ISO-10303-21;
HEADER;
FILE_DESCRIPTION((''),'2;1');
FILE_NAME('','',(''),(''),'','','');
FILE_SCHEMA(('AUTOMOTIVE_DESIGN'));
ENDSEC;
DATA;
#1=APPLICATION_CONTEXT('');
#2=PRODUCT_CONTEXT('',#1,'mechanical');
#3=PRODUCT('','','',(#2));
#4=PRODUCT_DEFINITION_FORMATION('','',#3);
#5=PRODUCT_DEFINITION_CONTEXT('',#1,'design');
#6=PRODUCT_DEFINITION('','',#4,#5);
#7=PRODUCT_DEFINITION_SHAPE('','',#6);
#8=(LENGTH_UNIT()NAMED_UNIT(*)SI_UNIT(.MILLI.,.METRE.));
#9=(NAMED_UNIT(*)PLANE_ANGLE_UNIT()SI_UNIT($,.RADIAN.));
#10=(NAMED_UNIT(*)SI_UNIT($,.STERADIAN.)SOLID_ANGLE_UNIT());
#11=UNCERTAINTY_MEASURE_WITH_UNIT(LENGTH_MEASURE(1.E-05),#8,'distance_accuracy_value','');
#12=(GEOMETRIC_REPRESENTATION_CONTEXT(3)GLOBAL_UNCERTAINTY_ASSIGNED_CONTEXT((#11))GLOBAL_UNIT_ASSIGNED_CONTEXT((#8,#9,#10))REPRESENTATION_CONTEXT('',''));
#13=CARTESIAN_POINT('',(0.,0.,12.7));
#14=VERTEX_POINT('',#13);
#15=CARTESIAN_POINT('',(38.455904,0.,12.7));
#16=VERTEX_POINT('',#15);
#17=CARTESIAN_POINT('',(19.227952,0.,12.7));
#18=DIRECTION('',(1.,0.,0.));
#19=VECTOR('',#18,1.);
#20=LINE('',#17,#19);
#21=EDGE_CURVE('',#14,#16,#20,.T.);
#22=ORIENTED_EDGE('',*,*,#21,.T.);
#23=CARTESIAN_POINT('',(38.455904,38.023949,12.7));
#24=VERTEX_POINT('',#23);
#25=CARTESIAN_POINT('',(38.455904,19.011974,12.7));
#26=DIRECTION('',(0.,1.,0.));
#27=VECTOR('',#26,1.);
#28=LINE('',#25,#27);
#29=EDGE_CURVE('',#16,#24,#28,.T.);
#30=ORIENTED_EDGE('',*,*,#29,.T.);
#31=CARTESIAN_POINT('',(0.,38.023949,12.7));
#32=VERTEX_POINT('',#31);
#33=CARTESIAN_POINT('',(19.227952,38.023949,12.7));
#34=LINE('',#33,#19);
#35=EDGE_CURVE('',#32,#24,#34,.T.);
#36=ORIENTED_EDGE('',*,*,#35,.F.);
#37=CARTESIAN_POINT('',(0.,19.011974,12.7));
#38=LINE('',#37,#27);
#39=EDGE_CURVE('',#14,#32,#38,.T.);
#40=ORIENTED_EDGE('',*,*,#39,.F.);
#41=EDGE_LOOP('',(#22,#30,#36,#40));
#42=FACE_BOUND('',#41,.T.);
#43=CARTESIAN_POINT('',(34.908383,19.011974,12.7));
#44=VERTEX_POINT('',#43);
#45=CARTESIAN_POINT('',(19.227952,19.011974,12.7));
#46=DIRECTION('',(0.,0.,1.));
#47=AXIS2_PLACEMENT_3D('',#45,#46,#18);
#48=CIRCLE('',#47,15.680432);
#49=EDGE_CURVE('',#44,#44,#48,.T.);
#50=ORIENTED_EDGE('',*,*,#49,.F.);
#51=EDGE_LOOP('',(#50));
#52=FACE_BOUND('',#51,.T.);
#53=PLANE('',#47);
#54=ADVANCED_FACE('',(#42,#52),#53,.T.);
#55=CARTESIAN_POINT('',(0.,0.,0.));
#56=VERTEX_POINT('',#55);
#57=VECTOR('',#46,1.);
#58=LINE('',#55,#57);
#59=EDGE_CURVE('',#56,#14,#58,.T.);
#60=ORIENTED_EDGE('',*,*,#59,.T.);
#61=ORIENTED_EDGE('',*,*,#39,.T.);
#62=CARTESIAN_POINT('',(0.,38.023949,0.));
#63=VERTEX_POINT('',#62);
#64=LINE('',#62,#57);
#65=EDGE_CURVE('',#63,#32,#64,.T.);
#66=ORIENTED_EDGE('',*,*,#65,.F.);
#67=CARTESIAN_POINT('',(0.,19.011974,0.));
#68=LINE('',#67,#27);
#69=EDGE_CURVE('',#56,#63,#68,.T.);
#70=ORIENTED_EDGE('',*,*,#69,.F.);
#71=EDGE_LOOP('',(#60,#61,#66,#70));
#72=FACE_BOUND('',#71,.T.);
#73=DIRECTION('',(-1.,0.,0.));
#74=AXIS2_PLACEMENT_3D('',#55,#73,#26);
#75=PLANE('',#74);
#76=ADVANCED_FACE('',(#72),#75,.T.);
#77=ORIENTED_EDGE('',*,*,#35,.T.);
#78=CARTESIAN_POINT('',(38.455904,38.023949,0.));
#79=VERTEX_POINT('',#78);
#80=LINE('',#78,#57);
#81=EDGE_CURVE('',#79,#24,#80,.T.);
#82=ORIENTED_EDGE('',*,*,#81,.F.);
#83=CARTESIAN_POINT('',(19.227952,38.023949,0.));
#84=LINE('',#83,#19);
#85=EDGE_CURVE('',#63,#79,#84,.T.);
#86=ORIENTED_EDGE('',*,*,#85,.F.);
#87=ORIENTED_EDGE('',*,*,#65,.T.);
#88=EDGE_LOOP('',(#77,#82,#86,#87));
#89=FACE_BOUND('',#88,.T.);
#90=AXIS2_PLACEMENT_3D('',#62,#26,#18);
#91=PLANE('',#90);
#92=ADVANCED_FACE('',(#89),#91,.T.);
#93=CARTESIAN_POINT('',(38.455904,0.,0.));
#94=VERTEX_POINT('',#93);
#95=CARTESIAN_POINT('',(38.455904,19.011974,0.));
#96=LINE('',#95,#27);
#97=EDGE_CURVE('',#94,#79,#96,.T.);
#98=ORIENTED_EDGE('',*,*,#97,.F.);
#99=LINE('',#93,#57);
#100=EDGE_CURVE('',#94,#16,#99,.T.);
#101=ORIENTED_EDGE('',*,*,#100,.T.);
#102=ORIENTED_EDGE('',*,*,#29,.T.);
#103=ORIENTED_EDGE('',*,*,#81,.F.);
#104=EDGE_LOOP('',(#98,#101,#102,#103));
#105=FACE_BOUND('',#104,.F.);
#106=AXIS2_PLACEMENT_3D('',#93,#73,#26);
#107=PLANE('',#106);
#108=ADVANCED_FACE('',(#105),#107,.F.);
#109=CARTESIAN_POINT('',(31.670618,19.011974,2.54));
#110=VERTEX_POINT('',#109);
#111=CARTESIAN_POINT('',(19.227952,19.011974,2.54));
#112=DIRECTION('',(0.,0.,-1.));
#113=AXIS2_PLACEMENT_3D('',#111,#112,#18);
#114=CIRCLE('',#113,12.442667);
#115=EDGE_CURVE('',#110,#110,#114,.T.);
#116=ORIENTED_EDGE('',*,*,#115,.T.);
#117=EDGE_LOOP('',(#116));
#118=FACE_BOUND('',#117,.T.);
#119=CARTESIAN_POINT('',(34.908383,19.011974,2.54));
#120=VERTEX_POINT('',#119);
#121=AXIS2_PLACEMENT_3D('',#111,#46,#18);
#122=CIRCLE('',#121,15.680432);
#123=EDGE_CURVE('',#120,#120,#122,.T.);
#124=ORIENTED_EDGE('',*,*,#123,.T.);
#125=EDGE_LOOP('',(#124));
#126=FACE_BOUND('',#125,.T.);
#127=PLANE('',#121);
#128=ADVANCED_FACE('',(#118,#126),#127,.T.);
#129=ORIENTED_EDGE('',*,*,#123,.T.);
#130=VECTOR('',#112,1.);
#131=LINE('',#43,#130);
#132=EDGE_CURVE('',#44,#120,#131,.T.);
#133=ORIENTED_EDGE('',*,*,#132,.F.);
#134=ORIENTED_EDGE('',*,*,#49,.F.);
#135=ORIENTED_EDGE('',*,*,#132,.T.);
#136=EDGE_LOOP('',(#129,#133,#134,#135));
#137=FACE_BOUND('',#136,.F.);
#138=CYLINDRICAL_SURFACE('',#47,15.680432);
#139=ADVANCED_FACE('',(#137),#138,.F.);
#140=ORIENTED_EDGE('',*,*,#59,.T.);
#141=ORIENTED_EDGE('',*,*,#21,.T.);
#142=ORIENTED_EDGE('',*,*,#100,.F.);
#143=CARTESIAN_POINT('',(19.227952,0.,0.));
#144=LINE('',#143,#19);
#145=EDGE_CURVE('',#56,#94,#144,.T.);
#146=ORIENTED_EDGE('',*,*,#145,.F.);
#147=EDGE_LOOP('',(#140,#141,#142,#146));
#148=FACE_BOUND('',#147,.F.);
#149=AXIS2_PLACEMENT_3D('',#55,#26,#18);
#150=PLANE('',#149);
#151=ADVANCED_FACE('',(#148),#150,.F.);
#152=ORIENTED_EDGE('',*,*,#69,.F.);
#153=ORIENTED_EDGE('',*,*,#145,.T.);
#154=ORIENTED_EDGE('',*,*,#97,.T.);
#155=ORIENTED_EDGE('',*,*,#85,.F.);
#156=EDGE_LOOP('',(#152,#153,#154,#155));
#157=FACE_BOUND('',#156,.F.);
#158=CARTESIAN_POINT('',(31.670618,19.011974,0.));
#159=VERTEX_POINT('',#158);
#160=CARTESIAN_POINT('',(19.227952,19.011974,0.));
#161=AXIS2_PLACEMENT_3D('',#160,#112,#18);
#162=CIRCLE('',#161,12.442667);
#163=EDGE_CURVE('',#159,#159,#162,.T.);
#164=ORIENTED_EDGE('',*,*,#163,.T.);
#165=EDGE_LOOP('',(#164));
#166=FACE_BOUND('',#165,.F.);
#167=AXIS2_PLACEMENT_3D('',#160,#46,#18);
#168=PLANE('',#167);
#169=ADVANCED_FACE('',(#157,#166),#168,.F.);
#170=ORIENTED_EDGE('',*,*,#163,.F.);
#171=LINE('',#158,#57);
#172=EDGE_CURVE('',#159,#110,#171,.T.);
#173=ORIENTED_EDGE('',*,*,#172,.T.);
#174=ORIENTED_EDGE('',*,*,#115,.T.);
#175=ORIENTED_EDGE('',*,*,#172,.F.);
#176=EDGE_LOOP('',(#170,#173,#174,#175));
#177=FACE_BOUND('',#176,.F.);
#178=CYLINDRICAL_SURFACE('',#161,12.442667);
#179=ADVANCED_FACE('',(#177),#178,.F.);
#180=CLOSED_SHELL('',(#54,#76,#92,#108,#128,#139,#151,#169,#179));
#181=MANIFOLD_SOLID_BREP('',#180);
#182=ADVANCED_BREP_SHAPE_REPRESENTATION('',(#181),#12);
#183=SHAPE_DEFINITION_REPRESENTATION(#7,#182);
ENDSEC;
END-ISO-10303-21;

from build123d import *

# Parameters (mm, degrees)
F0_W     = 38.4559035301
F0_H     = 38.0239486694
F1_DEPTH = 12.7
F2_R     = 15.6804316887
F5_DEPTH = 10.16
F6_R     = 12.442666724
F7_DEPTH = 12.701


# Not quite as in the source:
# - the program builds the solid bodies; features that only make, move or delete a surface that nothing else refers to are left out


with BuildPart() as f1:
    # F0 (on Top) → F1 (new body)
    with BuildSketch(Plane.XY):
        with Locations((19.2279517651, 19.0119743347)):
            Rectangle(F0_W, F0_H)
    extrude(amount=F1_DEPTH)

    # F2 (on face) → F5 (cut)
    with BuildSketch(Plane.XY.offset(12.7)):
        with Locations((19.2279517651, 19.0119743347)):
            Circle(F2_R)
    extrude(amount=-F5_DEPTH, mode=Mode.SUBTRACT)

    # F6 (on face) → F7 (cut, through all)
    with BuildSketch(Plane(origin=(0, 0, 0), x_dir=(1, 0, 0), z_dir=(0, 0, -1))):
        with Locations((19.2279517651, -19.0119743347)):
            Circle(F6_R)
    extrude(amount=-F7_DEPTH, mode=Mode.SUBTRACT)


solid = f1.part
